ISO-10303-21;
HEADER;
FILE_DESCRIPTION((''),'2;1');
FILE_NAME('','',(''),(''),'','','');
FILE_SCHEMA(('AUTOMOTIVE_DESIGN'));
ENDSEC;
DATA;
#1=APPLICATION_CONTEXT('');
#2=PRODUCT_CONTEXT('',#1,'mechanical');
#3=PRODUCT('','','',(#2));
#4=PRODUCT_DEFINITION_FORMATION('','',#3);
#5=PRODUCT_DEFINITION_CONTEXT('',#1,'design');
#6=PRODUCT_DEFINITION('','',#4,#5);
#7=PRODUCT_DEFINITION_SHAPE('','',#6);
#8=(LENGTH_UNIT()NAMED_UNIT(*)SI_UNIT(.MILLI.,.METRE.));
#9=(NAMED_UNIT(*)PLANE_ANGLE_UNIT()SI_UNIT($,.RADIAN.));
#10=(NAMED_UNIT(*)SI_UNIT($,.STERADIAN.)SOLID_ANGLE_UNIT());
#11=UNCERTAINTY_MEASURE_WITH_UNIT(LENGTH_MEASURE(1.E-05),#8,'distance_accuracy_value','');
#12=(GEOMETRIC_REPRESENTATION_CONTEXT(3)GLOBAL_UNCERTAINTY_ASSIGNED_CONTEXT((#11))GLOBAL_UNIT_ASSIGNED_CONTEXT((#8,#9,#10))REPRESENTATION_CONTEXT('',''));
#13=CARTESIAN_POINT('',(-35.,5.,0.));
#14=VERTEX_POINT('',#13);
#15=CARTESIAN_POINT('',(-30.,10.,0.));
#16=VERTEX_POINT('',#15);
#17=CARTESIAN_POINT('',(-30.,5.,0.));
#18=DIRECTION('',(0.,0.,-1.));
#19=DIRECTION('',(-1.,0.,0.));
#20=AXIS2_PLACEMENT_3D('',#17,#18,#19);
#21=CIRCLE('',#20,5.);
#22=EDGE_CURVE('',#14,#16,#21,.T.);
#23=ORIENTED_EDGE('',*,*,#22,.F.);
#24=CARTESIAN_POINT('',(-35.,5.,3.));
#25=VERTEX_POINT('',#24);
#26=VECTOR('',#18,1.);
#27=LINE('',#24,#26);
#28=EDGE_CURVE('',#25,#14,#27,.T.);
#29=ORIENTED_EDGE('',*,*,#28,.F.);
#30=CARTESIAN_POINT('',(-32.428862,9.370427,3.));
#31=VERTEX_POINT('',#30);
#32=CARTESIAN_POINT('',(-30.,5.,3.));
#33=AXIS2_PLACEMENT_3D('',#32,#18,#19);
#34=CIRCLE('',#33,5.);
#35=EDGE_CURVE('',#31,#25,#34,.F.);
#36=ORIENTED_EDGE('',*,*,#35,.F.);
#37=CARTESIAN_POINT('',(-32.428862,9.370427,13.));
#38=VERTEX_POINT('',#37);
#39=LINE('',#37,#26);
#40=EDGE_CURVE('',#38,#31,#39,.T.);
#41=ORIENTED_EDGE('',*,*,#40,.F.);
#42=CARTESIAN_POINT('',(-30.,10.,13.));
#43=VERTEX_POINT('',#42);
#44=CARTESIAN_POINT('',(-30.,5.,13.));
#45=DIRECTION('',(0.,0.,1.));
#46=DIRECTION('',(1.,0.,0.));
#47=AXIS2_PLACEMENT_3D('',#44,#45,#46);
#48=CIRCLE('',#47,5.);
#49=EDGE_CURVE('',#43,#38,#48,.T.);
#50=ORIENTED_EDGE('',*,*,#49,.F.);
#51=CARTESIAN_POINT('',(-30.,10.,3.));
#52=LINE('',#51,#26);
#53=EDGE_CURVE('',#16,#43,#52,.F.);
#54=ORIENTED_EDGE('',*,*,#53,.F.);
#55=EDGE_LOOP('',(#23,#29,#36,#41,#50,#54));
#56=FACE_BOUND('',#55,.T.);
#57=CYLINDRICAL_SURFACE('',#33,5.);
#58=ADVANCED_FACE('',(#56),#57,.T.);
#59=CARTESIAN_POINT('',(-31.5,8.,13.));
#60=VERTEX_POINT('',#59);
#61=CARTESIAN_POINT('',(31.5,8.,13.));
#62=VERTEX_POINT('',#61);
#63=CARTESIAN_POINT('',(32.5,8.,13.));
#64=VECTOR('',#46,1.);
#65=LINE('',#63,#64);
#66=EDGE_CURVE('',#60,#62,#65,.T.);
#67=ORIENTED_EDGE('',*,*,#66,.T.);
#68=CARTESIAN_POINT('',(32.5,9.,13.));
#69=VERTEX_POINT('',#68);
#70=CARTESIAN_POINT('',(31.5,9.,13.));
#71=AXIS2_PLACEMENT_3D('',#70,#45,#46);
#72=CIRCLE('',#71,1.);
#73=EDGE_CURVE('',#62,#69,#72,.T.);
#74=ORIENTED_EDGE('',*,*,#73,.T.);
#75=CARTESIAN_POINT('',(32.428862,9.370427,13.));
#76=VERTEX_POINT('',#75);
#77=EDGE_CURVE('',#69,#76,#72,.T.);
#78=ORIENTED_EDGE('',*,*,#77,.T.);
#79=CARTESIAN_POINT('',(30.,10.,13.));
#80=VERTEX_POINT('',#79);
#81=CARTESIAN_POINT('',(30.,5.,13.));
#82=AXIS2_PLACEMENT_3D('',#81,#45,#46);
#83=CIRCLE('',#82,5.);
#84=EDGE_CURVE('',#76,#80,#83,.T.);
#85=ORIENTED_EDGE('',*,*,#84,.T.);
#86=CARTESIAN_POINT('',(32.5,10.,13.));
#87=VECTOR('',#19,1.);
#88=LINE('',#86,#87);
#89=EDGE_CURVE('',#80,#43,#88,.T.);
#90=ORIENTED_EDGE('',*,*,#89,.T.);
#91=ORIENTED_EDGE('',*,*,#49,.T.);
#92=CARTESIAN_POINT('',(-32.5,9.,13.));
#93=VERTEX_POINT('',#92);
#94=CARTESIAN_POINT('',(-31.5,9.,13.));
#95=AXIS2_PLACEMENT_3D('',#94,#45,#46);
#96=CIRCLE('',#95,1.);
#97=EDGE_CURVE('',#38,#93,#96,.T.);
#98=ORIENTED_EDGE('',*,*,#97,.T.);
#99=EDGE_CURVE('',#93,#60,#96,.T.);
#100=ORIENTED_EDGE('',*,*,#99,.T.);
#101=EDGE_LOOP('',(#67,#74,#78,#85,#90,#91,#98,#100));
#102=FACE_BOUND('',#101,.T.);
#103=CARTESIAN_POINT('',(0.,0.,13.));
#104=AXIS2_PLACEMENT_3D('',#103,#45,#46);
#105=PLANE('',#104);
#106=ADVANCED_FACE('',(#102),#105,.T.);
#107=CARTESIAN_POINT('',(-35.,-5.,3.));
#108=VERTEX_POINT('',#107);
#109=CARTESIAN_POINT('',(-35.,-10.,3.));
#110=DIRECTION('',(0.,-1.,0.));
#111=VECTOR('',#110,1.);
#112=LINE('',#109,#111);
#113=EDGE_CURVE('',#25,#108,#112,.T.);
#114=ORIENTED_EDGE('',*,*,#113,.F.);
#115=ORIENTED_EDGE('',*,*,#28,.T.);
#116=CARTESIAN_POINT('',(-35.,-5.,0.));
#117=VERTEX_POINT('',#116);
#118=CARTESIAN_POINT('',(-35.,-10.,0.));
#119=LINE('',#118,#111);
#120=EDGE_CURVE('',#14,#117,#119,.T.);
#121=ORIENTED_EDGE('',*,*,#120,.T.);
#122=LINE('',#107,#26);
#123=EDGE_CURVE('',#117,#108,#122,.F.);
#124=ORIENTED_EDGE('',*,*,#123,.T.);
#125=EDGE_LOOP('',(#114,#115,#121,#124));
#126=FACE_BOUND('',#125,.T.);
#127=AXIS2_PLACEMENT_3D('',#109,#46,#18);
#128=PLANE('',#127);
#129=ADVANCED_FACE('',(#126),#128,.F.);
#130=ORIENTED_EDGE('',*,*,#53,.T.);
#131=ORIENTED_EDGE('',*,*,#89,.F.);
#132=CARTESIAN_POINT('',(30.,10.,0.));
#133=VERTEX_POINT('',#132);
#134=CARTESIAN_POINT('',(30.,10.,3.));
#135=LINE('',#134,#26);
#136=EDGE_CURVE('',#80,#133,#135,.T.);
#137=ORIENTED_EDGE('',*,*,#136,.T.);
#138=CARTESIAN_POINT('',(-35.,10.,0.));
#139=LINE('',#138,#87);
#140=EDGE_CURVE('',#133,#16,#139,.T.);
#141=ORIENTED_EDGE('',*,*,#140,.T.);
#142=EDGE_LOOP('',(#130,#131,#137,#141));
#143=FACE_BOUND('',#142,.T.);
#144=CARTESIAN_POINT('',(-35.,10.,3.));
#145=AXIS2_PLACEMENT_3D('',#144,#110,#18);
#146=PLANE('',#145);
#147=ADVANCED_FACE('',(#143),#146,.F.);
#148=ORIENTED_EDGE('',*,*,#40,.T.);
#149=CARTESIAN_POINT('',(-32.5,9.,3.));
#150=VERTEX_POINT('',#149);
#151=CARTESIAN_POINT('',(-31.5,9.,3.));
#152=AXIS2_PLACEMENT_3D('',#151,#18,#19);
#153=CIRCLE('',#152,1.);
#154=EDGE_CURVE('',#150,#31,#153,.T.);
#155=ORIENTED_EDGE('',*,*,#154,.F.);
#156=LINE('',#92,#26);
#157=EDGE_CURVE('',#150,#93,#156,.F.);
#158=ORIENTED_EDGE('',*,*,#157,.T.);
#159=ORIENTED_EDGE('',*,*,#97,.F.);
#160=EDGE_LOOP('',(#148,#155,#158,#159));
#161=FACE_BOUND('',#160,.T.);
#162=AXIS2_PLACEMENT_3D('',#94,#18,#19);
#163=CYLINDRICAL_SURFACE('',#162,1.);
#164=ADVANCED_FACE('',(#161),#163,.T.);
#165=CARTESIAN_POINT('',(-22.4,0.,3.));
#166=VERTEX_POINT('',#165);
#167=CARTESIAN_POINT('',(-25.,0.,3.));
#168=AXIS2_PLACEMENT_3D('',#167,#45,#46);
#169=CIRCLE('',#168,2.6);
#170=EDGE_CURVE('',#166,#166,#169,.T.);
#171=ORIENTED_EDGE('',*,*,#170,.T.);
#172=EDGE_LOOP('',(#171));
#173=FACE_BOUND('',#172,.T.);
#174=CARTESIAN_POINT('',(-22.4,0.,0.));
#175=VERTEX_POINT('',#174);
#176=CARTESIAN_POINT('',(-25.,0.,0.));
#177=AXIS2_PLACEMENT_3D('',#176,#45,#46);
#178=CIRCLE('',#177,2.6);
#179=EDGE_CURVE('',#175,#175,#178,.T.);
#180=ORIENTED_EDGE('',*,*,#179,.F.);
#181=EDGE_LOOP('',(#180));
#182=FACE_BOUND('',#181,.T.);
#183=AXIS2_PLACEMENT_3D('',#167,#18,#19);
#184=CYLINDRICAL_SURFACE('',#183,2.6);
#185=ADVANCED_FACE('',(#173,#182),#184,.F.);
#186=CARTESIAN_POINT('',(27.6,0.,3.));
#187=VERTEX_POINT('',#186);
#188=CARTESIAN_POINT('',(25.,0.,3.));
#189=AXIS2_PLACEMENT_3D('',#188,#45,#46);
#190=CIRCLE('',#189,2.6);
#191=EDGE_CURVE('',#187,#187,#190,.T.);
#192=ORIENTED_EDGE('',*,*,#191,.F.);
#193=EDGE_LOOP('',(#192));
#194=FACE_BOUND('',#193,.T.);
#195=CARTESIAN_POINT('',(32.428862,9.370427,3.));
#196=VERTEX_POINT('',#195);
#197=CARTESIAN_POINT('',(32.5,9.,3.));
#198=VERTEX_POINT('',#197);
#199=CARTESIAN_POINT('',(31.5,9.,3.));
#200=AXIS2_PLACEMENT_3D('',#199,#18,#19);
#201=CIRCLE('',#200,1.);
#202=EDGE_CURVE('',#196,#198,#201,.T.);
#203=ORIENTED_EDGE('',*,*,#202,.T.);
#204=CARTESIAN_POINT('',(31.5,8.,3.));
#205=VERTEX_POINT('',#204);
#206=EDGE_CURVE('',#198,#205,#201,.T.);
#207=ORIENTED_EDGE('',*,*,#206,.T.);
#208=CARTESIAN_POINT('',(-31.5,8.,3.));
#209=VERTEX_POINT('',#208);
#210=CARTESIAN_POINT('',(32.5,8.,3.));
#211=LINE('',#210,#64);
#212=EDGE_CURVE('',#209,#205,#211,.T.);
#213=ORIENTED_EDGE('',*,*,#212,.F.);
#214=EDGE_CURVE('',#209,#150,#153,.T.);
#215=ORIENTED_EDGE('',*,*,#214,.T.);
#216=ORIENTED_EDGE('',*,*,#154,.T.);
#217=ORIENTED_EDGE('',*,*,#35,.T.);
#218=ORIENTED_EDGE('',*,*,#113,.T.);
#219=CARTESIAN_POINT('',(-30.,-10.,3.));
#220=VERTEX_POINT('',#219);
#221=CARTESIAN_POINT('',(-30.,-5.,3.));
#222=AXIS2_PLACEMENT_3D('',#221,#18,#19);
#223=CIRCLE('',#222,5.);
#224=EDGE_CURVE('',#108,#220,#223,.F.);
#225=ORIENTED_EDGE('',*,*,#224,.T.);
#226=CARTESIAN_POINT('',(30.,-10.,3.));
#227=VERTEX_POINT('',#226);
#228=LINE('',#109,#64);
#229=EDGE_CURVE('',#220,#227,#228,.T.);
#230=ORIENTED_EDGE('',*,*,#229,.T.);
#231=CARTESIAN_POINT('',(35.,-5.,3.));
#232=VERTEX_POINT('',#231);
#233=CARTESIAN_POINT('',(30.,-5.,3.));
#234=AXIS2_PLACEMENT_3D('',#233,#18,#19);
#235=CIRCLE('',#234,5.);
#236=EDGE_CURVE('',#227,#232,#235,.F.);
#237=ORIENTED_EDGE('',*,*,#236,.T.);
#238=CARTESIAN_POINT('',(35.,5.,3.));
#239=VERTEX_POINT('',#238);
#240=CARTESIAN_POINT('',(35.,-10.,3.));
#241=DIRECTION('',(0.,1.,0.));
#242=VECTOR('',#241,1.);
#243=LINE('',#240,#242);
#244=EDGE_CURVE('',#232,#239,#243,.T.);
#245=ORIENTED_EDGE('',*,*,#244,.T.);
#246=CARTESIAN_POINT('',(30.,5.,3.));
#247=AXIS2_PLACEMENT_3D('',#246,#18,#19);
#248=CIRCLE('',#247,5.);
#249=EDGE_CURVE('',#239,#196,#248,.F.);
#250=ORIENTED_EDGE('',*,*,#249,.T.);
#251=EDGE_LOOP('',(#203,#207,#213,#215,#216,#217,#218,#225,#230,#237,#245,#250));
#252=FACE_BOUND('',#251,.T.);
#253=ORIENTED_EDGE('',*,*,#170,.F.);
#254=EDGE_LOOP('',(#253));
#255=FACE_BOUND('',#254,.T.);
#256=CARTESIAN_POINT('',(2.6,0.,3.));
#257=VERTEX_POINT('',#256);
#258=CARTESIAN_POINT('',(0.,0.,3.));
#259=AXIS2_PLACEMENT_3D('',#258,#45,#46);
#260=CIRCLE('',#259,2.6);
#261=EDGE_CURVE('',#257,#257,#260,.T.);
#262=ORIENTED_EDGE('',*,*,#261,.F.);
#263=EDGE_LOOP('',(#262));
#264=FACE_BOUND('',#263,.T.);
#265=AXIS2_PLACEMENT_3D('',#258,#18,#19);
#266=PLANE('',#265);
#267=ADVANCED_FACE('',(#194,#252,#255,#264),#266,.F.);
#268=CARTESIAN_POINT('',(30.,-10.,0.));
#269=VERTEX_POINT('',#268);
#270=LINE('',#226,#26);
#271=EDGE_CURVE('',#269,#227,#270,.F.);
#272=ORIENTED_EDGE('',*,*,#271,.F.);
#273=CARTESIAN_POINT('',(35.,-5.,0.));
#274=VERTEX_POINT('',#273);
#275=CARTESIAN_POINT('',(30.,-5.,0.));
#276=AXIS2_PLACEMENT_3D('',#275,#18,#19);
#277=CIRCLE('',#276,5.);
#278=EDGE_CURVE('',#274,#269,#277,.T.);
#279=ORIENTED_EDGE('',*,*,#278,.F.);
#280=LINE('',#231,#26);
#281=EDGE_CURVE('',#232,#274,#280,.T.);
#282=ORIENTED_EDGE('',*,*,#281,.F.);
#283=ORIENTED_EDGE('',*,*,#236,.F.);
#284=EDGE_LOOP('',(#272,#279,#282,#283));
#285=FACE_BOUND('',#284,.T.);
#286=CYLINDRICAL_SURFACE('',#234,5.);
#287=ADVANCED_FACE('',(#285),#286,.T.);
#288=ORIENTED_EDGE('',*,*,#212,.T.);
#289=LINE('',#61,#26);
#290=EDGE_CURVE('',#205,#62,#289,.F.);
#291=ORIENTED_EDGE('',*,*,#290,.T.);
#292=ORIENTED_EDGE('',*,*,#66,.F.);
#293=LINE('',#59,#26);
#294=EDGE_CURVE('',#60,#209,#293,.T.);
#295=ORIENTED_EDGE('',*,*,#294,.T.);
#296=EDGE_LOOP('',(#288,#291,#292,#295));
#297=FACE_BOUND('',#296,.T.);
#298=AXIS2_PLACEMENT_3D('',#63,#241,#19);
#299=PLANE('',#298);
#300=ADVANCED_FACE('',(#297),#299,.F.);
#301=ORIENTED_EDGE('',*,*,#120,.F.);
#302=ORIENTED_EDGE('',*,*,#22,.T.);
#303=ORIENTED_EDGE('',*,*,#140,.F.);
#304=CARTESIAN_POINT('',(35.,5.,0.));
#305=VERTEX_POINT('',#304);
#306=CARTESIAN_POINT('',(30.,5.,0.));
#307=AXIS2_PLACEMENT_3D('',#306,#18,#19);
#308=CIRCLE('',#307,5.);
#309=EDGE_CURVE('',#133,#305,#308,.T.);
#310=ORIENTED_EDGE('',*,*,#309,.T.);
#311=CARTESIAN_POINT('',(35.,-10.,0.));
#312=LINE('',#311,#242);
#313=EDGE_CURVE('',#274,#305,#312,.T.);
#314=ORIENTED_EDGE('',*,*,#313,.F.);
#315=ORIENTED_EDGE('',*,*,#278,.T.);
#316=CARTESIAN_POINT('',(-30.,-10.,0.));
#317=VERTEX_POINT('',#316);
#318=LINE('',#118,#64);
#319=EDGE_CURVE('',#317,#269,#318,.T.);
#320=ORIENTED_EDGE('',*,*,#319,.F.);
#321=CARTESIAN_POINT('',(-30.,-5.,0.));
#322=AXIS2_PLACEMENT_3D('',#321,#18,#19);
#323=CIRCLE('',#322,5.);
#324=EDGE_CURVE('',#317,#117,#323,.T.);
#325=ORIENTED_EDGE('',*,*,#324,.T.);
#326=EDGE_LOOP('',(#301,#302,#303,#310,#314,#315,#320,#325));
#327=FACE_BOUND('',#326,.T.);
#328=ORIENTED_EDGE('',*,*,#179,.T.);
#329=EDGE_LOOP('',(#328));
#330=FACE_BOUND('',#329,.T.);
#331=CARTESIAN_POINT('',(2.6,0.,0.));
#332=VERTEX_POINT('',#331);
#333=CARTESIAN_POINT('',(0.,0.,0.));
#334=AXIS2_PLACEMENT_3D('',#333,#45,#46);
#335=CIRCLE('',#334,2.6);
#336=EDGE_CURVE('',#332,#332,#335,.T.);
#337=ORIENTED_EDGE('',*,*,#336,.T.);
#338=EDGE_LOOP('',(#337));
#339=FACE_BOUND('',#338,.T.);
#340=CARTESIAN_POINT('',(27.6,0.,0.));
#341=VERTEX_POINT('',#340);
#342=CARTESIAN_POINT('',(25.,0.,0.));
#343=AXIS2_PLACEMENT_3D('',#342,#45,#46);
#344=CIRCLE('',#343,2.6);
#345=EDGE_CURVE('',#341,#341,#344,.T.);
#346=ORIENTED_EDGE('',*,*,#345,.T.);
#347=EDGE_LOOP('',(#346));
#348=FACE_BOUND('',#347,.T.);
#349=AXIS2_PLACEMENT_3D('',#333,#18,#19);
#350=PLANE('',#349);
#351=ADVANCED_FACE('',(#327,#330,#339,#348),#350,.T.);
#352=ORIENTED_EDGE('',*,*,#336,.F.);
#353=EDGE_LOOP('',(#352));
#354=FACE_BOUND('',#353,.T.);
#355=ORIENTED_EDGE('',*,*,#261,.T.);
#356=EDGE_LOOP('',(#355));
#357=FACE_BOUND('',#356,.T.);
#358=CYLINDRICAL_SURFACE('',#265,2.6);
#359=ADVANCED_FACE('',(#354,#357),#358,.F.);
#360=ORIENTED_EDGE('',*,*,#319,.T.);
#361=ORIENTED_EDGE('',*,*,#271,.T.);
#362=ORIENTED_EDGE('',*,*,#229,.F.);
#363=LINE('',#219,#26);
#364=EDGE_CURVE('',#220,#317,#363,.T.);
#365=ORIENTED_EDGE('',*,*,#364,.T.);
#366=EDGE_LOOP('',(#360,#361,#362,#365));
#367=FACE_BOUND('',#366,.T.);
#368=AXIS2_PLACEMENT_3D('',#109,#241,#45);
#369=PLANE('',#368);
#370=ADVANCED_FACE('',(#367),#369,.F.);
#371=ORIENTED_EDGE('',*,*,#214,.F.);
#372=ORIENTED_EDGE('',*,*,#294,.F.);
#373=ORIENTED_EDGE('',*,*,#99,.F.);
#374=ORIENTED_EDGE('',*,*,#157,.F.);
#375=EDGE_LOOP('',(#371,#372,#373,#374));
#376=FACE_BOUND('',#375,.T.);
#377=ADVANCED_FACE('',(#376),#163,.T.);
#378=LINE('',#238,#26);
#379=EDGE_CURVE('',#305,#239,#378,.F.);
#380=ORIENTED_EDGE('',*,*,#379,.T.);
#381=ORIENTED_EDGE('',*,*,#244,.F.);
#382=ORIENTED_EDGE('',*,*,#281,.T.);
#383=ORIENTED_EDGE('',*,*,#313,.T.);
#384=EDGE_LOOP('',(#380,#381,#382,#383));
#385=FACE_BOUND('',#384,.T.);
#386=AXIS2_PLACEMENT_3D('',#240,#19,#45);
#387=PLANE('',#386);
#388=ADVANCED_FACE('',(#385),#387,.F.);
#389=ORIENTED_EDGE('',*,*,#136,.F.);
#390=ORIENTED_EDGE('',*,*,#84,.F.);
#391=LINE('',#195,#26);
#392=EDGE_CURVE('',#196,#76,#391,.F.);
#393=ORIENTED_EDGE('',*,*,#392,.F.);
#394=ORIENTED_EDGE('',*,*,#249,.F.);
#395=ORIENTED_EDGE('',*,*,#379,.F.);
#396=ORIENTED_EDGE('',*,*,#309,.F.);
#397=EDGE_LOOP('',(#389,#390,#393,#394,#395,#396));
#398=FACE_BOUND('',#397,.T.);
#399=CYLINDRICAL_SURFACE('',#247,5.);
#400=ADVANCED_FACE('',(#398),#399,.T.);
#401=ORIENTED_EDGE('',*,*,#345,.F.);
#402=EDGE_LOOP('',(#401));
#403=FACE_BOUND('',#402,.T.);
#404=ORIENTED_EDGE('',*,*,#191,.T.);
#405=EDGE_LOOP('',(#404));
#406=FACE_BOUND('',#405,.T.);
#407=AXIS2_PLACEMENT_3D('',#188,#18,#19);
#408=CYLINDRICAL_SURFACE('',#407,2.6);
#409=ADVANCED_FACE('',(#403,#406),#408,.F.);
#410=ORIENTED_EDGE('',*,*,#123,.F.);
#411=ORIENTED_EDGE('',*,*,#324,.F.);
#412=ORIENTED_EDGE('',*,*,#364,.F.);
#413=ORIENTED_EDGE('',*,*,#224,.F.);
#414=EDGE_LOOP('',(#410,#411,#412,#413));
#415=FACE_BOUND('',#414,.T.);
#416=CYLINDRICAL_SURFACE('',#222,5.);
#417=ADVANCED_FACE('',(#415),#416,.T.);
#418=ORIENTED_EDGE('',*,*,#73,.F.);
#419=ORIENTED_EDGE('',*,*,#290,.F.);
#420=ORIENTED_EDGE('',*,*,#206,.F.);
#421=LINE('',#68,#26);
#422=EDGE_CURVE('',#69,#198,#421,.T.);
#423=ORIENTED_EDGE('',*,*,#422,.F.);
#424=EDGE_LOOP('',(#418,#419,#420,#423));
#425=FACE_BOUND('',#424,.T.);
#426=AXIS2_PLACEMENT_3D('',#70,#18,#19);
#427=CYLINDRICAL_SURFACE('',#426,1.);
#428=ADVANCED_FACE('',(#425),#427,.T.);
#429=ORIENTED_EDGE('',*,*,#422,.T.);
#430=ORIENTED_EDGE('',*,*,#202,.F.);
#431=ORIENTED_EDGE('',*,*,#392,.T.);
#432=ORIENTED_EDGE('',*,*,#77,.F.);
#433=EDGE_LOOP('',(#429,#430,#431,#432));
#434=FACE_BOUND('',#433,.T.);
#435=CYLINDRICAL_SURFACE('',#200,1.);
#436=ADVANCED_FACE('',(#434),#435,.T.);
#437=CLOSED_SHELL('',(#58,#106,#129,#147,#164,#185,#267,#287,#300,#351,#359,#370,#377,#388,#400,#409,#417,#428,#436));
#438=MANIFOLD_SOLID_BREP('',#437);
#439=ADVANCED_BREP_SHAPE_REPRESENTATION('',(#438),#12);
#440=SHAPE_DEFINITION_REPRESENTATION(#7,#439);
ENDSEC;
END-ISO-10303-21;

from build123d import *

# Parameters (mm, degrees)
SKETCH_2_W      = 70
SKETCH_2_H      = 20
SKETCH_2_R      = 2.6
EXTRUDE_1_DEPTH = 3
SKETCH_3_W      = 65
SKETCH_3_H      = 2
EXTRUDE_2_DEPTH = 10
FILLET_1_R      = 1
FILLET_2_R      = 5


with BuildPart() as part:
    # ｽｹｯﾁ2 → ﾎﾞｽ - 押し出し1 (new body)
    with BuildSketch(Plane.XY):
        Rectangle(SKETCH_2_W, SKETCH_2_H)
        with Locations((-25, 0)):
            Circle(SKETCH_2_R, mode=Mode.SUBTRACT)
        with Locations((25, 0)):
            Circle(SKETCH_2_R, mode=Mode.SUBTRACT)
        Circle(SKETCH_2_R, mode=Mode.SUBTRACT)
    extrude(amount=EXTRUDE_1_DEPTH)

    # ｽｹｯﾁ3 → ﾎﾞｽ - 押し出し2 (add)
    with BuildSketch(Plane.XY.offset(3)):
        with Locations((0, 9)):
            Rectangle(SKETCH_3_W, SKETCH_3_H)
    extrude(amount=EXTRUDE_2_DEPTH)

    # ﾌｨﾚｯﾄ1
    fillet_1_edges = [part.edges().sort_by_distance(p)[0] for p in [
        (-32.5, 10, 8),
        (-32.5, 8, 8),
        (32.5, 10, 8),
        (32.5, 8, 8),
    ]]
    fillet(fillet_1_edges, radius=FILLET_1_R - 0.0001)  # a hair under: the kernel refuses the full size

    # ﾌｨﾚｯﾄ2
    fillet_2_edges = [part.edges().sort_by_distance(p)[0] for p in [
        (-35, -10, 1.5),
        (-35, 10, 1.5),
        (35, -10, 1.5),
        (35, 10, 1.5),
    ]]
    fillet(fillet_2_edges, radius=FILLET_2_R)


solid = part.part
